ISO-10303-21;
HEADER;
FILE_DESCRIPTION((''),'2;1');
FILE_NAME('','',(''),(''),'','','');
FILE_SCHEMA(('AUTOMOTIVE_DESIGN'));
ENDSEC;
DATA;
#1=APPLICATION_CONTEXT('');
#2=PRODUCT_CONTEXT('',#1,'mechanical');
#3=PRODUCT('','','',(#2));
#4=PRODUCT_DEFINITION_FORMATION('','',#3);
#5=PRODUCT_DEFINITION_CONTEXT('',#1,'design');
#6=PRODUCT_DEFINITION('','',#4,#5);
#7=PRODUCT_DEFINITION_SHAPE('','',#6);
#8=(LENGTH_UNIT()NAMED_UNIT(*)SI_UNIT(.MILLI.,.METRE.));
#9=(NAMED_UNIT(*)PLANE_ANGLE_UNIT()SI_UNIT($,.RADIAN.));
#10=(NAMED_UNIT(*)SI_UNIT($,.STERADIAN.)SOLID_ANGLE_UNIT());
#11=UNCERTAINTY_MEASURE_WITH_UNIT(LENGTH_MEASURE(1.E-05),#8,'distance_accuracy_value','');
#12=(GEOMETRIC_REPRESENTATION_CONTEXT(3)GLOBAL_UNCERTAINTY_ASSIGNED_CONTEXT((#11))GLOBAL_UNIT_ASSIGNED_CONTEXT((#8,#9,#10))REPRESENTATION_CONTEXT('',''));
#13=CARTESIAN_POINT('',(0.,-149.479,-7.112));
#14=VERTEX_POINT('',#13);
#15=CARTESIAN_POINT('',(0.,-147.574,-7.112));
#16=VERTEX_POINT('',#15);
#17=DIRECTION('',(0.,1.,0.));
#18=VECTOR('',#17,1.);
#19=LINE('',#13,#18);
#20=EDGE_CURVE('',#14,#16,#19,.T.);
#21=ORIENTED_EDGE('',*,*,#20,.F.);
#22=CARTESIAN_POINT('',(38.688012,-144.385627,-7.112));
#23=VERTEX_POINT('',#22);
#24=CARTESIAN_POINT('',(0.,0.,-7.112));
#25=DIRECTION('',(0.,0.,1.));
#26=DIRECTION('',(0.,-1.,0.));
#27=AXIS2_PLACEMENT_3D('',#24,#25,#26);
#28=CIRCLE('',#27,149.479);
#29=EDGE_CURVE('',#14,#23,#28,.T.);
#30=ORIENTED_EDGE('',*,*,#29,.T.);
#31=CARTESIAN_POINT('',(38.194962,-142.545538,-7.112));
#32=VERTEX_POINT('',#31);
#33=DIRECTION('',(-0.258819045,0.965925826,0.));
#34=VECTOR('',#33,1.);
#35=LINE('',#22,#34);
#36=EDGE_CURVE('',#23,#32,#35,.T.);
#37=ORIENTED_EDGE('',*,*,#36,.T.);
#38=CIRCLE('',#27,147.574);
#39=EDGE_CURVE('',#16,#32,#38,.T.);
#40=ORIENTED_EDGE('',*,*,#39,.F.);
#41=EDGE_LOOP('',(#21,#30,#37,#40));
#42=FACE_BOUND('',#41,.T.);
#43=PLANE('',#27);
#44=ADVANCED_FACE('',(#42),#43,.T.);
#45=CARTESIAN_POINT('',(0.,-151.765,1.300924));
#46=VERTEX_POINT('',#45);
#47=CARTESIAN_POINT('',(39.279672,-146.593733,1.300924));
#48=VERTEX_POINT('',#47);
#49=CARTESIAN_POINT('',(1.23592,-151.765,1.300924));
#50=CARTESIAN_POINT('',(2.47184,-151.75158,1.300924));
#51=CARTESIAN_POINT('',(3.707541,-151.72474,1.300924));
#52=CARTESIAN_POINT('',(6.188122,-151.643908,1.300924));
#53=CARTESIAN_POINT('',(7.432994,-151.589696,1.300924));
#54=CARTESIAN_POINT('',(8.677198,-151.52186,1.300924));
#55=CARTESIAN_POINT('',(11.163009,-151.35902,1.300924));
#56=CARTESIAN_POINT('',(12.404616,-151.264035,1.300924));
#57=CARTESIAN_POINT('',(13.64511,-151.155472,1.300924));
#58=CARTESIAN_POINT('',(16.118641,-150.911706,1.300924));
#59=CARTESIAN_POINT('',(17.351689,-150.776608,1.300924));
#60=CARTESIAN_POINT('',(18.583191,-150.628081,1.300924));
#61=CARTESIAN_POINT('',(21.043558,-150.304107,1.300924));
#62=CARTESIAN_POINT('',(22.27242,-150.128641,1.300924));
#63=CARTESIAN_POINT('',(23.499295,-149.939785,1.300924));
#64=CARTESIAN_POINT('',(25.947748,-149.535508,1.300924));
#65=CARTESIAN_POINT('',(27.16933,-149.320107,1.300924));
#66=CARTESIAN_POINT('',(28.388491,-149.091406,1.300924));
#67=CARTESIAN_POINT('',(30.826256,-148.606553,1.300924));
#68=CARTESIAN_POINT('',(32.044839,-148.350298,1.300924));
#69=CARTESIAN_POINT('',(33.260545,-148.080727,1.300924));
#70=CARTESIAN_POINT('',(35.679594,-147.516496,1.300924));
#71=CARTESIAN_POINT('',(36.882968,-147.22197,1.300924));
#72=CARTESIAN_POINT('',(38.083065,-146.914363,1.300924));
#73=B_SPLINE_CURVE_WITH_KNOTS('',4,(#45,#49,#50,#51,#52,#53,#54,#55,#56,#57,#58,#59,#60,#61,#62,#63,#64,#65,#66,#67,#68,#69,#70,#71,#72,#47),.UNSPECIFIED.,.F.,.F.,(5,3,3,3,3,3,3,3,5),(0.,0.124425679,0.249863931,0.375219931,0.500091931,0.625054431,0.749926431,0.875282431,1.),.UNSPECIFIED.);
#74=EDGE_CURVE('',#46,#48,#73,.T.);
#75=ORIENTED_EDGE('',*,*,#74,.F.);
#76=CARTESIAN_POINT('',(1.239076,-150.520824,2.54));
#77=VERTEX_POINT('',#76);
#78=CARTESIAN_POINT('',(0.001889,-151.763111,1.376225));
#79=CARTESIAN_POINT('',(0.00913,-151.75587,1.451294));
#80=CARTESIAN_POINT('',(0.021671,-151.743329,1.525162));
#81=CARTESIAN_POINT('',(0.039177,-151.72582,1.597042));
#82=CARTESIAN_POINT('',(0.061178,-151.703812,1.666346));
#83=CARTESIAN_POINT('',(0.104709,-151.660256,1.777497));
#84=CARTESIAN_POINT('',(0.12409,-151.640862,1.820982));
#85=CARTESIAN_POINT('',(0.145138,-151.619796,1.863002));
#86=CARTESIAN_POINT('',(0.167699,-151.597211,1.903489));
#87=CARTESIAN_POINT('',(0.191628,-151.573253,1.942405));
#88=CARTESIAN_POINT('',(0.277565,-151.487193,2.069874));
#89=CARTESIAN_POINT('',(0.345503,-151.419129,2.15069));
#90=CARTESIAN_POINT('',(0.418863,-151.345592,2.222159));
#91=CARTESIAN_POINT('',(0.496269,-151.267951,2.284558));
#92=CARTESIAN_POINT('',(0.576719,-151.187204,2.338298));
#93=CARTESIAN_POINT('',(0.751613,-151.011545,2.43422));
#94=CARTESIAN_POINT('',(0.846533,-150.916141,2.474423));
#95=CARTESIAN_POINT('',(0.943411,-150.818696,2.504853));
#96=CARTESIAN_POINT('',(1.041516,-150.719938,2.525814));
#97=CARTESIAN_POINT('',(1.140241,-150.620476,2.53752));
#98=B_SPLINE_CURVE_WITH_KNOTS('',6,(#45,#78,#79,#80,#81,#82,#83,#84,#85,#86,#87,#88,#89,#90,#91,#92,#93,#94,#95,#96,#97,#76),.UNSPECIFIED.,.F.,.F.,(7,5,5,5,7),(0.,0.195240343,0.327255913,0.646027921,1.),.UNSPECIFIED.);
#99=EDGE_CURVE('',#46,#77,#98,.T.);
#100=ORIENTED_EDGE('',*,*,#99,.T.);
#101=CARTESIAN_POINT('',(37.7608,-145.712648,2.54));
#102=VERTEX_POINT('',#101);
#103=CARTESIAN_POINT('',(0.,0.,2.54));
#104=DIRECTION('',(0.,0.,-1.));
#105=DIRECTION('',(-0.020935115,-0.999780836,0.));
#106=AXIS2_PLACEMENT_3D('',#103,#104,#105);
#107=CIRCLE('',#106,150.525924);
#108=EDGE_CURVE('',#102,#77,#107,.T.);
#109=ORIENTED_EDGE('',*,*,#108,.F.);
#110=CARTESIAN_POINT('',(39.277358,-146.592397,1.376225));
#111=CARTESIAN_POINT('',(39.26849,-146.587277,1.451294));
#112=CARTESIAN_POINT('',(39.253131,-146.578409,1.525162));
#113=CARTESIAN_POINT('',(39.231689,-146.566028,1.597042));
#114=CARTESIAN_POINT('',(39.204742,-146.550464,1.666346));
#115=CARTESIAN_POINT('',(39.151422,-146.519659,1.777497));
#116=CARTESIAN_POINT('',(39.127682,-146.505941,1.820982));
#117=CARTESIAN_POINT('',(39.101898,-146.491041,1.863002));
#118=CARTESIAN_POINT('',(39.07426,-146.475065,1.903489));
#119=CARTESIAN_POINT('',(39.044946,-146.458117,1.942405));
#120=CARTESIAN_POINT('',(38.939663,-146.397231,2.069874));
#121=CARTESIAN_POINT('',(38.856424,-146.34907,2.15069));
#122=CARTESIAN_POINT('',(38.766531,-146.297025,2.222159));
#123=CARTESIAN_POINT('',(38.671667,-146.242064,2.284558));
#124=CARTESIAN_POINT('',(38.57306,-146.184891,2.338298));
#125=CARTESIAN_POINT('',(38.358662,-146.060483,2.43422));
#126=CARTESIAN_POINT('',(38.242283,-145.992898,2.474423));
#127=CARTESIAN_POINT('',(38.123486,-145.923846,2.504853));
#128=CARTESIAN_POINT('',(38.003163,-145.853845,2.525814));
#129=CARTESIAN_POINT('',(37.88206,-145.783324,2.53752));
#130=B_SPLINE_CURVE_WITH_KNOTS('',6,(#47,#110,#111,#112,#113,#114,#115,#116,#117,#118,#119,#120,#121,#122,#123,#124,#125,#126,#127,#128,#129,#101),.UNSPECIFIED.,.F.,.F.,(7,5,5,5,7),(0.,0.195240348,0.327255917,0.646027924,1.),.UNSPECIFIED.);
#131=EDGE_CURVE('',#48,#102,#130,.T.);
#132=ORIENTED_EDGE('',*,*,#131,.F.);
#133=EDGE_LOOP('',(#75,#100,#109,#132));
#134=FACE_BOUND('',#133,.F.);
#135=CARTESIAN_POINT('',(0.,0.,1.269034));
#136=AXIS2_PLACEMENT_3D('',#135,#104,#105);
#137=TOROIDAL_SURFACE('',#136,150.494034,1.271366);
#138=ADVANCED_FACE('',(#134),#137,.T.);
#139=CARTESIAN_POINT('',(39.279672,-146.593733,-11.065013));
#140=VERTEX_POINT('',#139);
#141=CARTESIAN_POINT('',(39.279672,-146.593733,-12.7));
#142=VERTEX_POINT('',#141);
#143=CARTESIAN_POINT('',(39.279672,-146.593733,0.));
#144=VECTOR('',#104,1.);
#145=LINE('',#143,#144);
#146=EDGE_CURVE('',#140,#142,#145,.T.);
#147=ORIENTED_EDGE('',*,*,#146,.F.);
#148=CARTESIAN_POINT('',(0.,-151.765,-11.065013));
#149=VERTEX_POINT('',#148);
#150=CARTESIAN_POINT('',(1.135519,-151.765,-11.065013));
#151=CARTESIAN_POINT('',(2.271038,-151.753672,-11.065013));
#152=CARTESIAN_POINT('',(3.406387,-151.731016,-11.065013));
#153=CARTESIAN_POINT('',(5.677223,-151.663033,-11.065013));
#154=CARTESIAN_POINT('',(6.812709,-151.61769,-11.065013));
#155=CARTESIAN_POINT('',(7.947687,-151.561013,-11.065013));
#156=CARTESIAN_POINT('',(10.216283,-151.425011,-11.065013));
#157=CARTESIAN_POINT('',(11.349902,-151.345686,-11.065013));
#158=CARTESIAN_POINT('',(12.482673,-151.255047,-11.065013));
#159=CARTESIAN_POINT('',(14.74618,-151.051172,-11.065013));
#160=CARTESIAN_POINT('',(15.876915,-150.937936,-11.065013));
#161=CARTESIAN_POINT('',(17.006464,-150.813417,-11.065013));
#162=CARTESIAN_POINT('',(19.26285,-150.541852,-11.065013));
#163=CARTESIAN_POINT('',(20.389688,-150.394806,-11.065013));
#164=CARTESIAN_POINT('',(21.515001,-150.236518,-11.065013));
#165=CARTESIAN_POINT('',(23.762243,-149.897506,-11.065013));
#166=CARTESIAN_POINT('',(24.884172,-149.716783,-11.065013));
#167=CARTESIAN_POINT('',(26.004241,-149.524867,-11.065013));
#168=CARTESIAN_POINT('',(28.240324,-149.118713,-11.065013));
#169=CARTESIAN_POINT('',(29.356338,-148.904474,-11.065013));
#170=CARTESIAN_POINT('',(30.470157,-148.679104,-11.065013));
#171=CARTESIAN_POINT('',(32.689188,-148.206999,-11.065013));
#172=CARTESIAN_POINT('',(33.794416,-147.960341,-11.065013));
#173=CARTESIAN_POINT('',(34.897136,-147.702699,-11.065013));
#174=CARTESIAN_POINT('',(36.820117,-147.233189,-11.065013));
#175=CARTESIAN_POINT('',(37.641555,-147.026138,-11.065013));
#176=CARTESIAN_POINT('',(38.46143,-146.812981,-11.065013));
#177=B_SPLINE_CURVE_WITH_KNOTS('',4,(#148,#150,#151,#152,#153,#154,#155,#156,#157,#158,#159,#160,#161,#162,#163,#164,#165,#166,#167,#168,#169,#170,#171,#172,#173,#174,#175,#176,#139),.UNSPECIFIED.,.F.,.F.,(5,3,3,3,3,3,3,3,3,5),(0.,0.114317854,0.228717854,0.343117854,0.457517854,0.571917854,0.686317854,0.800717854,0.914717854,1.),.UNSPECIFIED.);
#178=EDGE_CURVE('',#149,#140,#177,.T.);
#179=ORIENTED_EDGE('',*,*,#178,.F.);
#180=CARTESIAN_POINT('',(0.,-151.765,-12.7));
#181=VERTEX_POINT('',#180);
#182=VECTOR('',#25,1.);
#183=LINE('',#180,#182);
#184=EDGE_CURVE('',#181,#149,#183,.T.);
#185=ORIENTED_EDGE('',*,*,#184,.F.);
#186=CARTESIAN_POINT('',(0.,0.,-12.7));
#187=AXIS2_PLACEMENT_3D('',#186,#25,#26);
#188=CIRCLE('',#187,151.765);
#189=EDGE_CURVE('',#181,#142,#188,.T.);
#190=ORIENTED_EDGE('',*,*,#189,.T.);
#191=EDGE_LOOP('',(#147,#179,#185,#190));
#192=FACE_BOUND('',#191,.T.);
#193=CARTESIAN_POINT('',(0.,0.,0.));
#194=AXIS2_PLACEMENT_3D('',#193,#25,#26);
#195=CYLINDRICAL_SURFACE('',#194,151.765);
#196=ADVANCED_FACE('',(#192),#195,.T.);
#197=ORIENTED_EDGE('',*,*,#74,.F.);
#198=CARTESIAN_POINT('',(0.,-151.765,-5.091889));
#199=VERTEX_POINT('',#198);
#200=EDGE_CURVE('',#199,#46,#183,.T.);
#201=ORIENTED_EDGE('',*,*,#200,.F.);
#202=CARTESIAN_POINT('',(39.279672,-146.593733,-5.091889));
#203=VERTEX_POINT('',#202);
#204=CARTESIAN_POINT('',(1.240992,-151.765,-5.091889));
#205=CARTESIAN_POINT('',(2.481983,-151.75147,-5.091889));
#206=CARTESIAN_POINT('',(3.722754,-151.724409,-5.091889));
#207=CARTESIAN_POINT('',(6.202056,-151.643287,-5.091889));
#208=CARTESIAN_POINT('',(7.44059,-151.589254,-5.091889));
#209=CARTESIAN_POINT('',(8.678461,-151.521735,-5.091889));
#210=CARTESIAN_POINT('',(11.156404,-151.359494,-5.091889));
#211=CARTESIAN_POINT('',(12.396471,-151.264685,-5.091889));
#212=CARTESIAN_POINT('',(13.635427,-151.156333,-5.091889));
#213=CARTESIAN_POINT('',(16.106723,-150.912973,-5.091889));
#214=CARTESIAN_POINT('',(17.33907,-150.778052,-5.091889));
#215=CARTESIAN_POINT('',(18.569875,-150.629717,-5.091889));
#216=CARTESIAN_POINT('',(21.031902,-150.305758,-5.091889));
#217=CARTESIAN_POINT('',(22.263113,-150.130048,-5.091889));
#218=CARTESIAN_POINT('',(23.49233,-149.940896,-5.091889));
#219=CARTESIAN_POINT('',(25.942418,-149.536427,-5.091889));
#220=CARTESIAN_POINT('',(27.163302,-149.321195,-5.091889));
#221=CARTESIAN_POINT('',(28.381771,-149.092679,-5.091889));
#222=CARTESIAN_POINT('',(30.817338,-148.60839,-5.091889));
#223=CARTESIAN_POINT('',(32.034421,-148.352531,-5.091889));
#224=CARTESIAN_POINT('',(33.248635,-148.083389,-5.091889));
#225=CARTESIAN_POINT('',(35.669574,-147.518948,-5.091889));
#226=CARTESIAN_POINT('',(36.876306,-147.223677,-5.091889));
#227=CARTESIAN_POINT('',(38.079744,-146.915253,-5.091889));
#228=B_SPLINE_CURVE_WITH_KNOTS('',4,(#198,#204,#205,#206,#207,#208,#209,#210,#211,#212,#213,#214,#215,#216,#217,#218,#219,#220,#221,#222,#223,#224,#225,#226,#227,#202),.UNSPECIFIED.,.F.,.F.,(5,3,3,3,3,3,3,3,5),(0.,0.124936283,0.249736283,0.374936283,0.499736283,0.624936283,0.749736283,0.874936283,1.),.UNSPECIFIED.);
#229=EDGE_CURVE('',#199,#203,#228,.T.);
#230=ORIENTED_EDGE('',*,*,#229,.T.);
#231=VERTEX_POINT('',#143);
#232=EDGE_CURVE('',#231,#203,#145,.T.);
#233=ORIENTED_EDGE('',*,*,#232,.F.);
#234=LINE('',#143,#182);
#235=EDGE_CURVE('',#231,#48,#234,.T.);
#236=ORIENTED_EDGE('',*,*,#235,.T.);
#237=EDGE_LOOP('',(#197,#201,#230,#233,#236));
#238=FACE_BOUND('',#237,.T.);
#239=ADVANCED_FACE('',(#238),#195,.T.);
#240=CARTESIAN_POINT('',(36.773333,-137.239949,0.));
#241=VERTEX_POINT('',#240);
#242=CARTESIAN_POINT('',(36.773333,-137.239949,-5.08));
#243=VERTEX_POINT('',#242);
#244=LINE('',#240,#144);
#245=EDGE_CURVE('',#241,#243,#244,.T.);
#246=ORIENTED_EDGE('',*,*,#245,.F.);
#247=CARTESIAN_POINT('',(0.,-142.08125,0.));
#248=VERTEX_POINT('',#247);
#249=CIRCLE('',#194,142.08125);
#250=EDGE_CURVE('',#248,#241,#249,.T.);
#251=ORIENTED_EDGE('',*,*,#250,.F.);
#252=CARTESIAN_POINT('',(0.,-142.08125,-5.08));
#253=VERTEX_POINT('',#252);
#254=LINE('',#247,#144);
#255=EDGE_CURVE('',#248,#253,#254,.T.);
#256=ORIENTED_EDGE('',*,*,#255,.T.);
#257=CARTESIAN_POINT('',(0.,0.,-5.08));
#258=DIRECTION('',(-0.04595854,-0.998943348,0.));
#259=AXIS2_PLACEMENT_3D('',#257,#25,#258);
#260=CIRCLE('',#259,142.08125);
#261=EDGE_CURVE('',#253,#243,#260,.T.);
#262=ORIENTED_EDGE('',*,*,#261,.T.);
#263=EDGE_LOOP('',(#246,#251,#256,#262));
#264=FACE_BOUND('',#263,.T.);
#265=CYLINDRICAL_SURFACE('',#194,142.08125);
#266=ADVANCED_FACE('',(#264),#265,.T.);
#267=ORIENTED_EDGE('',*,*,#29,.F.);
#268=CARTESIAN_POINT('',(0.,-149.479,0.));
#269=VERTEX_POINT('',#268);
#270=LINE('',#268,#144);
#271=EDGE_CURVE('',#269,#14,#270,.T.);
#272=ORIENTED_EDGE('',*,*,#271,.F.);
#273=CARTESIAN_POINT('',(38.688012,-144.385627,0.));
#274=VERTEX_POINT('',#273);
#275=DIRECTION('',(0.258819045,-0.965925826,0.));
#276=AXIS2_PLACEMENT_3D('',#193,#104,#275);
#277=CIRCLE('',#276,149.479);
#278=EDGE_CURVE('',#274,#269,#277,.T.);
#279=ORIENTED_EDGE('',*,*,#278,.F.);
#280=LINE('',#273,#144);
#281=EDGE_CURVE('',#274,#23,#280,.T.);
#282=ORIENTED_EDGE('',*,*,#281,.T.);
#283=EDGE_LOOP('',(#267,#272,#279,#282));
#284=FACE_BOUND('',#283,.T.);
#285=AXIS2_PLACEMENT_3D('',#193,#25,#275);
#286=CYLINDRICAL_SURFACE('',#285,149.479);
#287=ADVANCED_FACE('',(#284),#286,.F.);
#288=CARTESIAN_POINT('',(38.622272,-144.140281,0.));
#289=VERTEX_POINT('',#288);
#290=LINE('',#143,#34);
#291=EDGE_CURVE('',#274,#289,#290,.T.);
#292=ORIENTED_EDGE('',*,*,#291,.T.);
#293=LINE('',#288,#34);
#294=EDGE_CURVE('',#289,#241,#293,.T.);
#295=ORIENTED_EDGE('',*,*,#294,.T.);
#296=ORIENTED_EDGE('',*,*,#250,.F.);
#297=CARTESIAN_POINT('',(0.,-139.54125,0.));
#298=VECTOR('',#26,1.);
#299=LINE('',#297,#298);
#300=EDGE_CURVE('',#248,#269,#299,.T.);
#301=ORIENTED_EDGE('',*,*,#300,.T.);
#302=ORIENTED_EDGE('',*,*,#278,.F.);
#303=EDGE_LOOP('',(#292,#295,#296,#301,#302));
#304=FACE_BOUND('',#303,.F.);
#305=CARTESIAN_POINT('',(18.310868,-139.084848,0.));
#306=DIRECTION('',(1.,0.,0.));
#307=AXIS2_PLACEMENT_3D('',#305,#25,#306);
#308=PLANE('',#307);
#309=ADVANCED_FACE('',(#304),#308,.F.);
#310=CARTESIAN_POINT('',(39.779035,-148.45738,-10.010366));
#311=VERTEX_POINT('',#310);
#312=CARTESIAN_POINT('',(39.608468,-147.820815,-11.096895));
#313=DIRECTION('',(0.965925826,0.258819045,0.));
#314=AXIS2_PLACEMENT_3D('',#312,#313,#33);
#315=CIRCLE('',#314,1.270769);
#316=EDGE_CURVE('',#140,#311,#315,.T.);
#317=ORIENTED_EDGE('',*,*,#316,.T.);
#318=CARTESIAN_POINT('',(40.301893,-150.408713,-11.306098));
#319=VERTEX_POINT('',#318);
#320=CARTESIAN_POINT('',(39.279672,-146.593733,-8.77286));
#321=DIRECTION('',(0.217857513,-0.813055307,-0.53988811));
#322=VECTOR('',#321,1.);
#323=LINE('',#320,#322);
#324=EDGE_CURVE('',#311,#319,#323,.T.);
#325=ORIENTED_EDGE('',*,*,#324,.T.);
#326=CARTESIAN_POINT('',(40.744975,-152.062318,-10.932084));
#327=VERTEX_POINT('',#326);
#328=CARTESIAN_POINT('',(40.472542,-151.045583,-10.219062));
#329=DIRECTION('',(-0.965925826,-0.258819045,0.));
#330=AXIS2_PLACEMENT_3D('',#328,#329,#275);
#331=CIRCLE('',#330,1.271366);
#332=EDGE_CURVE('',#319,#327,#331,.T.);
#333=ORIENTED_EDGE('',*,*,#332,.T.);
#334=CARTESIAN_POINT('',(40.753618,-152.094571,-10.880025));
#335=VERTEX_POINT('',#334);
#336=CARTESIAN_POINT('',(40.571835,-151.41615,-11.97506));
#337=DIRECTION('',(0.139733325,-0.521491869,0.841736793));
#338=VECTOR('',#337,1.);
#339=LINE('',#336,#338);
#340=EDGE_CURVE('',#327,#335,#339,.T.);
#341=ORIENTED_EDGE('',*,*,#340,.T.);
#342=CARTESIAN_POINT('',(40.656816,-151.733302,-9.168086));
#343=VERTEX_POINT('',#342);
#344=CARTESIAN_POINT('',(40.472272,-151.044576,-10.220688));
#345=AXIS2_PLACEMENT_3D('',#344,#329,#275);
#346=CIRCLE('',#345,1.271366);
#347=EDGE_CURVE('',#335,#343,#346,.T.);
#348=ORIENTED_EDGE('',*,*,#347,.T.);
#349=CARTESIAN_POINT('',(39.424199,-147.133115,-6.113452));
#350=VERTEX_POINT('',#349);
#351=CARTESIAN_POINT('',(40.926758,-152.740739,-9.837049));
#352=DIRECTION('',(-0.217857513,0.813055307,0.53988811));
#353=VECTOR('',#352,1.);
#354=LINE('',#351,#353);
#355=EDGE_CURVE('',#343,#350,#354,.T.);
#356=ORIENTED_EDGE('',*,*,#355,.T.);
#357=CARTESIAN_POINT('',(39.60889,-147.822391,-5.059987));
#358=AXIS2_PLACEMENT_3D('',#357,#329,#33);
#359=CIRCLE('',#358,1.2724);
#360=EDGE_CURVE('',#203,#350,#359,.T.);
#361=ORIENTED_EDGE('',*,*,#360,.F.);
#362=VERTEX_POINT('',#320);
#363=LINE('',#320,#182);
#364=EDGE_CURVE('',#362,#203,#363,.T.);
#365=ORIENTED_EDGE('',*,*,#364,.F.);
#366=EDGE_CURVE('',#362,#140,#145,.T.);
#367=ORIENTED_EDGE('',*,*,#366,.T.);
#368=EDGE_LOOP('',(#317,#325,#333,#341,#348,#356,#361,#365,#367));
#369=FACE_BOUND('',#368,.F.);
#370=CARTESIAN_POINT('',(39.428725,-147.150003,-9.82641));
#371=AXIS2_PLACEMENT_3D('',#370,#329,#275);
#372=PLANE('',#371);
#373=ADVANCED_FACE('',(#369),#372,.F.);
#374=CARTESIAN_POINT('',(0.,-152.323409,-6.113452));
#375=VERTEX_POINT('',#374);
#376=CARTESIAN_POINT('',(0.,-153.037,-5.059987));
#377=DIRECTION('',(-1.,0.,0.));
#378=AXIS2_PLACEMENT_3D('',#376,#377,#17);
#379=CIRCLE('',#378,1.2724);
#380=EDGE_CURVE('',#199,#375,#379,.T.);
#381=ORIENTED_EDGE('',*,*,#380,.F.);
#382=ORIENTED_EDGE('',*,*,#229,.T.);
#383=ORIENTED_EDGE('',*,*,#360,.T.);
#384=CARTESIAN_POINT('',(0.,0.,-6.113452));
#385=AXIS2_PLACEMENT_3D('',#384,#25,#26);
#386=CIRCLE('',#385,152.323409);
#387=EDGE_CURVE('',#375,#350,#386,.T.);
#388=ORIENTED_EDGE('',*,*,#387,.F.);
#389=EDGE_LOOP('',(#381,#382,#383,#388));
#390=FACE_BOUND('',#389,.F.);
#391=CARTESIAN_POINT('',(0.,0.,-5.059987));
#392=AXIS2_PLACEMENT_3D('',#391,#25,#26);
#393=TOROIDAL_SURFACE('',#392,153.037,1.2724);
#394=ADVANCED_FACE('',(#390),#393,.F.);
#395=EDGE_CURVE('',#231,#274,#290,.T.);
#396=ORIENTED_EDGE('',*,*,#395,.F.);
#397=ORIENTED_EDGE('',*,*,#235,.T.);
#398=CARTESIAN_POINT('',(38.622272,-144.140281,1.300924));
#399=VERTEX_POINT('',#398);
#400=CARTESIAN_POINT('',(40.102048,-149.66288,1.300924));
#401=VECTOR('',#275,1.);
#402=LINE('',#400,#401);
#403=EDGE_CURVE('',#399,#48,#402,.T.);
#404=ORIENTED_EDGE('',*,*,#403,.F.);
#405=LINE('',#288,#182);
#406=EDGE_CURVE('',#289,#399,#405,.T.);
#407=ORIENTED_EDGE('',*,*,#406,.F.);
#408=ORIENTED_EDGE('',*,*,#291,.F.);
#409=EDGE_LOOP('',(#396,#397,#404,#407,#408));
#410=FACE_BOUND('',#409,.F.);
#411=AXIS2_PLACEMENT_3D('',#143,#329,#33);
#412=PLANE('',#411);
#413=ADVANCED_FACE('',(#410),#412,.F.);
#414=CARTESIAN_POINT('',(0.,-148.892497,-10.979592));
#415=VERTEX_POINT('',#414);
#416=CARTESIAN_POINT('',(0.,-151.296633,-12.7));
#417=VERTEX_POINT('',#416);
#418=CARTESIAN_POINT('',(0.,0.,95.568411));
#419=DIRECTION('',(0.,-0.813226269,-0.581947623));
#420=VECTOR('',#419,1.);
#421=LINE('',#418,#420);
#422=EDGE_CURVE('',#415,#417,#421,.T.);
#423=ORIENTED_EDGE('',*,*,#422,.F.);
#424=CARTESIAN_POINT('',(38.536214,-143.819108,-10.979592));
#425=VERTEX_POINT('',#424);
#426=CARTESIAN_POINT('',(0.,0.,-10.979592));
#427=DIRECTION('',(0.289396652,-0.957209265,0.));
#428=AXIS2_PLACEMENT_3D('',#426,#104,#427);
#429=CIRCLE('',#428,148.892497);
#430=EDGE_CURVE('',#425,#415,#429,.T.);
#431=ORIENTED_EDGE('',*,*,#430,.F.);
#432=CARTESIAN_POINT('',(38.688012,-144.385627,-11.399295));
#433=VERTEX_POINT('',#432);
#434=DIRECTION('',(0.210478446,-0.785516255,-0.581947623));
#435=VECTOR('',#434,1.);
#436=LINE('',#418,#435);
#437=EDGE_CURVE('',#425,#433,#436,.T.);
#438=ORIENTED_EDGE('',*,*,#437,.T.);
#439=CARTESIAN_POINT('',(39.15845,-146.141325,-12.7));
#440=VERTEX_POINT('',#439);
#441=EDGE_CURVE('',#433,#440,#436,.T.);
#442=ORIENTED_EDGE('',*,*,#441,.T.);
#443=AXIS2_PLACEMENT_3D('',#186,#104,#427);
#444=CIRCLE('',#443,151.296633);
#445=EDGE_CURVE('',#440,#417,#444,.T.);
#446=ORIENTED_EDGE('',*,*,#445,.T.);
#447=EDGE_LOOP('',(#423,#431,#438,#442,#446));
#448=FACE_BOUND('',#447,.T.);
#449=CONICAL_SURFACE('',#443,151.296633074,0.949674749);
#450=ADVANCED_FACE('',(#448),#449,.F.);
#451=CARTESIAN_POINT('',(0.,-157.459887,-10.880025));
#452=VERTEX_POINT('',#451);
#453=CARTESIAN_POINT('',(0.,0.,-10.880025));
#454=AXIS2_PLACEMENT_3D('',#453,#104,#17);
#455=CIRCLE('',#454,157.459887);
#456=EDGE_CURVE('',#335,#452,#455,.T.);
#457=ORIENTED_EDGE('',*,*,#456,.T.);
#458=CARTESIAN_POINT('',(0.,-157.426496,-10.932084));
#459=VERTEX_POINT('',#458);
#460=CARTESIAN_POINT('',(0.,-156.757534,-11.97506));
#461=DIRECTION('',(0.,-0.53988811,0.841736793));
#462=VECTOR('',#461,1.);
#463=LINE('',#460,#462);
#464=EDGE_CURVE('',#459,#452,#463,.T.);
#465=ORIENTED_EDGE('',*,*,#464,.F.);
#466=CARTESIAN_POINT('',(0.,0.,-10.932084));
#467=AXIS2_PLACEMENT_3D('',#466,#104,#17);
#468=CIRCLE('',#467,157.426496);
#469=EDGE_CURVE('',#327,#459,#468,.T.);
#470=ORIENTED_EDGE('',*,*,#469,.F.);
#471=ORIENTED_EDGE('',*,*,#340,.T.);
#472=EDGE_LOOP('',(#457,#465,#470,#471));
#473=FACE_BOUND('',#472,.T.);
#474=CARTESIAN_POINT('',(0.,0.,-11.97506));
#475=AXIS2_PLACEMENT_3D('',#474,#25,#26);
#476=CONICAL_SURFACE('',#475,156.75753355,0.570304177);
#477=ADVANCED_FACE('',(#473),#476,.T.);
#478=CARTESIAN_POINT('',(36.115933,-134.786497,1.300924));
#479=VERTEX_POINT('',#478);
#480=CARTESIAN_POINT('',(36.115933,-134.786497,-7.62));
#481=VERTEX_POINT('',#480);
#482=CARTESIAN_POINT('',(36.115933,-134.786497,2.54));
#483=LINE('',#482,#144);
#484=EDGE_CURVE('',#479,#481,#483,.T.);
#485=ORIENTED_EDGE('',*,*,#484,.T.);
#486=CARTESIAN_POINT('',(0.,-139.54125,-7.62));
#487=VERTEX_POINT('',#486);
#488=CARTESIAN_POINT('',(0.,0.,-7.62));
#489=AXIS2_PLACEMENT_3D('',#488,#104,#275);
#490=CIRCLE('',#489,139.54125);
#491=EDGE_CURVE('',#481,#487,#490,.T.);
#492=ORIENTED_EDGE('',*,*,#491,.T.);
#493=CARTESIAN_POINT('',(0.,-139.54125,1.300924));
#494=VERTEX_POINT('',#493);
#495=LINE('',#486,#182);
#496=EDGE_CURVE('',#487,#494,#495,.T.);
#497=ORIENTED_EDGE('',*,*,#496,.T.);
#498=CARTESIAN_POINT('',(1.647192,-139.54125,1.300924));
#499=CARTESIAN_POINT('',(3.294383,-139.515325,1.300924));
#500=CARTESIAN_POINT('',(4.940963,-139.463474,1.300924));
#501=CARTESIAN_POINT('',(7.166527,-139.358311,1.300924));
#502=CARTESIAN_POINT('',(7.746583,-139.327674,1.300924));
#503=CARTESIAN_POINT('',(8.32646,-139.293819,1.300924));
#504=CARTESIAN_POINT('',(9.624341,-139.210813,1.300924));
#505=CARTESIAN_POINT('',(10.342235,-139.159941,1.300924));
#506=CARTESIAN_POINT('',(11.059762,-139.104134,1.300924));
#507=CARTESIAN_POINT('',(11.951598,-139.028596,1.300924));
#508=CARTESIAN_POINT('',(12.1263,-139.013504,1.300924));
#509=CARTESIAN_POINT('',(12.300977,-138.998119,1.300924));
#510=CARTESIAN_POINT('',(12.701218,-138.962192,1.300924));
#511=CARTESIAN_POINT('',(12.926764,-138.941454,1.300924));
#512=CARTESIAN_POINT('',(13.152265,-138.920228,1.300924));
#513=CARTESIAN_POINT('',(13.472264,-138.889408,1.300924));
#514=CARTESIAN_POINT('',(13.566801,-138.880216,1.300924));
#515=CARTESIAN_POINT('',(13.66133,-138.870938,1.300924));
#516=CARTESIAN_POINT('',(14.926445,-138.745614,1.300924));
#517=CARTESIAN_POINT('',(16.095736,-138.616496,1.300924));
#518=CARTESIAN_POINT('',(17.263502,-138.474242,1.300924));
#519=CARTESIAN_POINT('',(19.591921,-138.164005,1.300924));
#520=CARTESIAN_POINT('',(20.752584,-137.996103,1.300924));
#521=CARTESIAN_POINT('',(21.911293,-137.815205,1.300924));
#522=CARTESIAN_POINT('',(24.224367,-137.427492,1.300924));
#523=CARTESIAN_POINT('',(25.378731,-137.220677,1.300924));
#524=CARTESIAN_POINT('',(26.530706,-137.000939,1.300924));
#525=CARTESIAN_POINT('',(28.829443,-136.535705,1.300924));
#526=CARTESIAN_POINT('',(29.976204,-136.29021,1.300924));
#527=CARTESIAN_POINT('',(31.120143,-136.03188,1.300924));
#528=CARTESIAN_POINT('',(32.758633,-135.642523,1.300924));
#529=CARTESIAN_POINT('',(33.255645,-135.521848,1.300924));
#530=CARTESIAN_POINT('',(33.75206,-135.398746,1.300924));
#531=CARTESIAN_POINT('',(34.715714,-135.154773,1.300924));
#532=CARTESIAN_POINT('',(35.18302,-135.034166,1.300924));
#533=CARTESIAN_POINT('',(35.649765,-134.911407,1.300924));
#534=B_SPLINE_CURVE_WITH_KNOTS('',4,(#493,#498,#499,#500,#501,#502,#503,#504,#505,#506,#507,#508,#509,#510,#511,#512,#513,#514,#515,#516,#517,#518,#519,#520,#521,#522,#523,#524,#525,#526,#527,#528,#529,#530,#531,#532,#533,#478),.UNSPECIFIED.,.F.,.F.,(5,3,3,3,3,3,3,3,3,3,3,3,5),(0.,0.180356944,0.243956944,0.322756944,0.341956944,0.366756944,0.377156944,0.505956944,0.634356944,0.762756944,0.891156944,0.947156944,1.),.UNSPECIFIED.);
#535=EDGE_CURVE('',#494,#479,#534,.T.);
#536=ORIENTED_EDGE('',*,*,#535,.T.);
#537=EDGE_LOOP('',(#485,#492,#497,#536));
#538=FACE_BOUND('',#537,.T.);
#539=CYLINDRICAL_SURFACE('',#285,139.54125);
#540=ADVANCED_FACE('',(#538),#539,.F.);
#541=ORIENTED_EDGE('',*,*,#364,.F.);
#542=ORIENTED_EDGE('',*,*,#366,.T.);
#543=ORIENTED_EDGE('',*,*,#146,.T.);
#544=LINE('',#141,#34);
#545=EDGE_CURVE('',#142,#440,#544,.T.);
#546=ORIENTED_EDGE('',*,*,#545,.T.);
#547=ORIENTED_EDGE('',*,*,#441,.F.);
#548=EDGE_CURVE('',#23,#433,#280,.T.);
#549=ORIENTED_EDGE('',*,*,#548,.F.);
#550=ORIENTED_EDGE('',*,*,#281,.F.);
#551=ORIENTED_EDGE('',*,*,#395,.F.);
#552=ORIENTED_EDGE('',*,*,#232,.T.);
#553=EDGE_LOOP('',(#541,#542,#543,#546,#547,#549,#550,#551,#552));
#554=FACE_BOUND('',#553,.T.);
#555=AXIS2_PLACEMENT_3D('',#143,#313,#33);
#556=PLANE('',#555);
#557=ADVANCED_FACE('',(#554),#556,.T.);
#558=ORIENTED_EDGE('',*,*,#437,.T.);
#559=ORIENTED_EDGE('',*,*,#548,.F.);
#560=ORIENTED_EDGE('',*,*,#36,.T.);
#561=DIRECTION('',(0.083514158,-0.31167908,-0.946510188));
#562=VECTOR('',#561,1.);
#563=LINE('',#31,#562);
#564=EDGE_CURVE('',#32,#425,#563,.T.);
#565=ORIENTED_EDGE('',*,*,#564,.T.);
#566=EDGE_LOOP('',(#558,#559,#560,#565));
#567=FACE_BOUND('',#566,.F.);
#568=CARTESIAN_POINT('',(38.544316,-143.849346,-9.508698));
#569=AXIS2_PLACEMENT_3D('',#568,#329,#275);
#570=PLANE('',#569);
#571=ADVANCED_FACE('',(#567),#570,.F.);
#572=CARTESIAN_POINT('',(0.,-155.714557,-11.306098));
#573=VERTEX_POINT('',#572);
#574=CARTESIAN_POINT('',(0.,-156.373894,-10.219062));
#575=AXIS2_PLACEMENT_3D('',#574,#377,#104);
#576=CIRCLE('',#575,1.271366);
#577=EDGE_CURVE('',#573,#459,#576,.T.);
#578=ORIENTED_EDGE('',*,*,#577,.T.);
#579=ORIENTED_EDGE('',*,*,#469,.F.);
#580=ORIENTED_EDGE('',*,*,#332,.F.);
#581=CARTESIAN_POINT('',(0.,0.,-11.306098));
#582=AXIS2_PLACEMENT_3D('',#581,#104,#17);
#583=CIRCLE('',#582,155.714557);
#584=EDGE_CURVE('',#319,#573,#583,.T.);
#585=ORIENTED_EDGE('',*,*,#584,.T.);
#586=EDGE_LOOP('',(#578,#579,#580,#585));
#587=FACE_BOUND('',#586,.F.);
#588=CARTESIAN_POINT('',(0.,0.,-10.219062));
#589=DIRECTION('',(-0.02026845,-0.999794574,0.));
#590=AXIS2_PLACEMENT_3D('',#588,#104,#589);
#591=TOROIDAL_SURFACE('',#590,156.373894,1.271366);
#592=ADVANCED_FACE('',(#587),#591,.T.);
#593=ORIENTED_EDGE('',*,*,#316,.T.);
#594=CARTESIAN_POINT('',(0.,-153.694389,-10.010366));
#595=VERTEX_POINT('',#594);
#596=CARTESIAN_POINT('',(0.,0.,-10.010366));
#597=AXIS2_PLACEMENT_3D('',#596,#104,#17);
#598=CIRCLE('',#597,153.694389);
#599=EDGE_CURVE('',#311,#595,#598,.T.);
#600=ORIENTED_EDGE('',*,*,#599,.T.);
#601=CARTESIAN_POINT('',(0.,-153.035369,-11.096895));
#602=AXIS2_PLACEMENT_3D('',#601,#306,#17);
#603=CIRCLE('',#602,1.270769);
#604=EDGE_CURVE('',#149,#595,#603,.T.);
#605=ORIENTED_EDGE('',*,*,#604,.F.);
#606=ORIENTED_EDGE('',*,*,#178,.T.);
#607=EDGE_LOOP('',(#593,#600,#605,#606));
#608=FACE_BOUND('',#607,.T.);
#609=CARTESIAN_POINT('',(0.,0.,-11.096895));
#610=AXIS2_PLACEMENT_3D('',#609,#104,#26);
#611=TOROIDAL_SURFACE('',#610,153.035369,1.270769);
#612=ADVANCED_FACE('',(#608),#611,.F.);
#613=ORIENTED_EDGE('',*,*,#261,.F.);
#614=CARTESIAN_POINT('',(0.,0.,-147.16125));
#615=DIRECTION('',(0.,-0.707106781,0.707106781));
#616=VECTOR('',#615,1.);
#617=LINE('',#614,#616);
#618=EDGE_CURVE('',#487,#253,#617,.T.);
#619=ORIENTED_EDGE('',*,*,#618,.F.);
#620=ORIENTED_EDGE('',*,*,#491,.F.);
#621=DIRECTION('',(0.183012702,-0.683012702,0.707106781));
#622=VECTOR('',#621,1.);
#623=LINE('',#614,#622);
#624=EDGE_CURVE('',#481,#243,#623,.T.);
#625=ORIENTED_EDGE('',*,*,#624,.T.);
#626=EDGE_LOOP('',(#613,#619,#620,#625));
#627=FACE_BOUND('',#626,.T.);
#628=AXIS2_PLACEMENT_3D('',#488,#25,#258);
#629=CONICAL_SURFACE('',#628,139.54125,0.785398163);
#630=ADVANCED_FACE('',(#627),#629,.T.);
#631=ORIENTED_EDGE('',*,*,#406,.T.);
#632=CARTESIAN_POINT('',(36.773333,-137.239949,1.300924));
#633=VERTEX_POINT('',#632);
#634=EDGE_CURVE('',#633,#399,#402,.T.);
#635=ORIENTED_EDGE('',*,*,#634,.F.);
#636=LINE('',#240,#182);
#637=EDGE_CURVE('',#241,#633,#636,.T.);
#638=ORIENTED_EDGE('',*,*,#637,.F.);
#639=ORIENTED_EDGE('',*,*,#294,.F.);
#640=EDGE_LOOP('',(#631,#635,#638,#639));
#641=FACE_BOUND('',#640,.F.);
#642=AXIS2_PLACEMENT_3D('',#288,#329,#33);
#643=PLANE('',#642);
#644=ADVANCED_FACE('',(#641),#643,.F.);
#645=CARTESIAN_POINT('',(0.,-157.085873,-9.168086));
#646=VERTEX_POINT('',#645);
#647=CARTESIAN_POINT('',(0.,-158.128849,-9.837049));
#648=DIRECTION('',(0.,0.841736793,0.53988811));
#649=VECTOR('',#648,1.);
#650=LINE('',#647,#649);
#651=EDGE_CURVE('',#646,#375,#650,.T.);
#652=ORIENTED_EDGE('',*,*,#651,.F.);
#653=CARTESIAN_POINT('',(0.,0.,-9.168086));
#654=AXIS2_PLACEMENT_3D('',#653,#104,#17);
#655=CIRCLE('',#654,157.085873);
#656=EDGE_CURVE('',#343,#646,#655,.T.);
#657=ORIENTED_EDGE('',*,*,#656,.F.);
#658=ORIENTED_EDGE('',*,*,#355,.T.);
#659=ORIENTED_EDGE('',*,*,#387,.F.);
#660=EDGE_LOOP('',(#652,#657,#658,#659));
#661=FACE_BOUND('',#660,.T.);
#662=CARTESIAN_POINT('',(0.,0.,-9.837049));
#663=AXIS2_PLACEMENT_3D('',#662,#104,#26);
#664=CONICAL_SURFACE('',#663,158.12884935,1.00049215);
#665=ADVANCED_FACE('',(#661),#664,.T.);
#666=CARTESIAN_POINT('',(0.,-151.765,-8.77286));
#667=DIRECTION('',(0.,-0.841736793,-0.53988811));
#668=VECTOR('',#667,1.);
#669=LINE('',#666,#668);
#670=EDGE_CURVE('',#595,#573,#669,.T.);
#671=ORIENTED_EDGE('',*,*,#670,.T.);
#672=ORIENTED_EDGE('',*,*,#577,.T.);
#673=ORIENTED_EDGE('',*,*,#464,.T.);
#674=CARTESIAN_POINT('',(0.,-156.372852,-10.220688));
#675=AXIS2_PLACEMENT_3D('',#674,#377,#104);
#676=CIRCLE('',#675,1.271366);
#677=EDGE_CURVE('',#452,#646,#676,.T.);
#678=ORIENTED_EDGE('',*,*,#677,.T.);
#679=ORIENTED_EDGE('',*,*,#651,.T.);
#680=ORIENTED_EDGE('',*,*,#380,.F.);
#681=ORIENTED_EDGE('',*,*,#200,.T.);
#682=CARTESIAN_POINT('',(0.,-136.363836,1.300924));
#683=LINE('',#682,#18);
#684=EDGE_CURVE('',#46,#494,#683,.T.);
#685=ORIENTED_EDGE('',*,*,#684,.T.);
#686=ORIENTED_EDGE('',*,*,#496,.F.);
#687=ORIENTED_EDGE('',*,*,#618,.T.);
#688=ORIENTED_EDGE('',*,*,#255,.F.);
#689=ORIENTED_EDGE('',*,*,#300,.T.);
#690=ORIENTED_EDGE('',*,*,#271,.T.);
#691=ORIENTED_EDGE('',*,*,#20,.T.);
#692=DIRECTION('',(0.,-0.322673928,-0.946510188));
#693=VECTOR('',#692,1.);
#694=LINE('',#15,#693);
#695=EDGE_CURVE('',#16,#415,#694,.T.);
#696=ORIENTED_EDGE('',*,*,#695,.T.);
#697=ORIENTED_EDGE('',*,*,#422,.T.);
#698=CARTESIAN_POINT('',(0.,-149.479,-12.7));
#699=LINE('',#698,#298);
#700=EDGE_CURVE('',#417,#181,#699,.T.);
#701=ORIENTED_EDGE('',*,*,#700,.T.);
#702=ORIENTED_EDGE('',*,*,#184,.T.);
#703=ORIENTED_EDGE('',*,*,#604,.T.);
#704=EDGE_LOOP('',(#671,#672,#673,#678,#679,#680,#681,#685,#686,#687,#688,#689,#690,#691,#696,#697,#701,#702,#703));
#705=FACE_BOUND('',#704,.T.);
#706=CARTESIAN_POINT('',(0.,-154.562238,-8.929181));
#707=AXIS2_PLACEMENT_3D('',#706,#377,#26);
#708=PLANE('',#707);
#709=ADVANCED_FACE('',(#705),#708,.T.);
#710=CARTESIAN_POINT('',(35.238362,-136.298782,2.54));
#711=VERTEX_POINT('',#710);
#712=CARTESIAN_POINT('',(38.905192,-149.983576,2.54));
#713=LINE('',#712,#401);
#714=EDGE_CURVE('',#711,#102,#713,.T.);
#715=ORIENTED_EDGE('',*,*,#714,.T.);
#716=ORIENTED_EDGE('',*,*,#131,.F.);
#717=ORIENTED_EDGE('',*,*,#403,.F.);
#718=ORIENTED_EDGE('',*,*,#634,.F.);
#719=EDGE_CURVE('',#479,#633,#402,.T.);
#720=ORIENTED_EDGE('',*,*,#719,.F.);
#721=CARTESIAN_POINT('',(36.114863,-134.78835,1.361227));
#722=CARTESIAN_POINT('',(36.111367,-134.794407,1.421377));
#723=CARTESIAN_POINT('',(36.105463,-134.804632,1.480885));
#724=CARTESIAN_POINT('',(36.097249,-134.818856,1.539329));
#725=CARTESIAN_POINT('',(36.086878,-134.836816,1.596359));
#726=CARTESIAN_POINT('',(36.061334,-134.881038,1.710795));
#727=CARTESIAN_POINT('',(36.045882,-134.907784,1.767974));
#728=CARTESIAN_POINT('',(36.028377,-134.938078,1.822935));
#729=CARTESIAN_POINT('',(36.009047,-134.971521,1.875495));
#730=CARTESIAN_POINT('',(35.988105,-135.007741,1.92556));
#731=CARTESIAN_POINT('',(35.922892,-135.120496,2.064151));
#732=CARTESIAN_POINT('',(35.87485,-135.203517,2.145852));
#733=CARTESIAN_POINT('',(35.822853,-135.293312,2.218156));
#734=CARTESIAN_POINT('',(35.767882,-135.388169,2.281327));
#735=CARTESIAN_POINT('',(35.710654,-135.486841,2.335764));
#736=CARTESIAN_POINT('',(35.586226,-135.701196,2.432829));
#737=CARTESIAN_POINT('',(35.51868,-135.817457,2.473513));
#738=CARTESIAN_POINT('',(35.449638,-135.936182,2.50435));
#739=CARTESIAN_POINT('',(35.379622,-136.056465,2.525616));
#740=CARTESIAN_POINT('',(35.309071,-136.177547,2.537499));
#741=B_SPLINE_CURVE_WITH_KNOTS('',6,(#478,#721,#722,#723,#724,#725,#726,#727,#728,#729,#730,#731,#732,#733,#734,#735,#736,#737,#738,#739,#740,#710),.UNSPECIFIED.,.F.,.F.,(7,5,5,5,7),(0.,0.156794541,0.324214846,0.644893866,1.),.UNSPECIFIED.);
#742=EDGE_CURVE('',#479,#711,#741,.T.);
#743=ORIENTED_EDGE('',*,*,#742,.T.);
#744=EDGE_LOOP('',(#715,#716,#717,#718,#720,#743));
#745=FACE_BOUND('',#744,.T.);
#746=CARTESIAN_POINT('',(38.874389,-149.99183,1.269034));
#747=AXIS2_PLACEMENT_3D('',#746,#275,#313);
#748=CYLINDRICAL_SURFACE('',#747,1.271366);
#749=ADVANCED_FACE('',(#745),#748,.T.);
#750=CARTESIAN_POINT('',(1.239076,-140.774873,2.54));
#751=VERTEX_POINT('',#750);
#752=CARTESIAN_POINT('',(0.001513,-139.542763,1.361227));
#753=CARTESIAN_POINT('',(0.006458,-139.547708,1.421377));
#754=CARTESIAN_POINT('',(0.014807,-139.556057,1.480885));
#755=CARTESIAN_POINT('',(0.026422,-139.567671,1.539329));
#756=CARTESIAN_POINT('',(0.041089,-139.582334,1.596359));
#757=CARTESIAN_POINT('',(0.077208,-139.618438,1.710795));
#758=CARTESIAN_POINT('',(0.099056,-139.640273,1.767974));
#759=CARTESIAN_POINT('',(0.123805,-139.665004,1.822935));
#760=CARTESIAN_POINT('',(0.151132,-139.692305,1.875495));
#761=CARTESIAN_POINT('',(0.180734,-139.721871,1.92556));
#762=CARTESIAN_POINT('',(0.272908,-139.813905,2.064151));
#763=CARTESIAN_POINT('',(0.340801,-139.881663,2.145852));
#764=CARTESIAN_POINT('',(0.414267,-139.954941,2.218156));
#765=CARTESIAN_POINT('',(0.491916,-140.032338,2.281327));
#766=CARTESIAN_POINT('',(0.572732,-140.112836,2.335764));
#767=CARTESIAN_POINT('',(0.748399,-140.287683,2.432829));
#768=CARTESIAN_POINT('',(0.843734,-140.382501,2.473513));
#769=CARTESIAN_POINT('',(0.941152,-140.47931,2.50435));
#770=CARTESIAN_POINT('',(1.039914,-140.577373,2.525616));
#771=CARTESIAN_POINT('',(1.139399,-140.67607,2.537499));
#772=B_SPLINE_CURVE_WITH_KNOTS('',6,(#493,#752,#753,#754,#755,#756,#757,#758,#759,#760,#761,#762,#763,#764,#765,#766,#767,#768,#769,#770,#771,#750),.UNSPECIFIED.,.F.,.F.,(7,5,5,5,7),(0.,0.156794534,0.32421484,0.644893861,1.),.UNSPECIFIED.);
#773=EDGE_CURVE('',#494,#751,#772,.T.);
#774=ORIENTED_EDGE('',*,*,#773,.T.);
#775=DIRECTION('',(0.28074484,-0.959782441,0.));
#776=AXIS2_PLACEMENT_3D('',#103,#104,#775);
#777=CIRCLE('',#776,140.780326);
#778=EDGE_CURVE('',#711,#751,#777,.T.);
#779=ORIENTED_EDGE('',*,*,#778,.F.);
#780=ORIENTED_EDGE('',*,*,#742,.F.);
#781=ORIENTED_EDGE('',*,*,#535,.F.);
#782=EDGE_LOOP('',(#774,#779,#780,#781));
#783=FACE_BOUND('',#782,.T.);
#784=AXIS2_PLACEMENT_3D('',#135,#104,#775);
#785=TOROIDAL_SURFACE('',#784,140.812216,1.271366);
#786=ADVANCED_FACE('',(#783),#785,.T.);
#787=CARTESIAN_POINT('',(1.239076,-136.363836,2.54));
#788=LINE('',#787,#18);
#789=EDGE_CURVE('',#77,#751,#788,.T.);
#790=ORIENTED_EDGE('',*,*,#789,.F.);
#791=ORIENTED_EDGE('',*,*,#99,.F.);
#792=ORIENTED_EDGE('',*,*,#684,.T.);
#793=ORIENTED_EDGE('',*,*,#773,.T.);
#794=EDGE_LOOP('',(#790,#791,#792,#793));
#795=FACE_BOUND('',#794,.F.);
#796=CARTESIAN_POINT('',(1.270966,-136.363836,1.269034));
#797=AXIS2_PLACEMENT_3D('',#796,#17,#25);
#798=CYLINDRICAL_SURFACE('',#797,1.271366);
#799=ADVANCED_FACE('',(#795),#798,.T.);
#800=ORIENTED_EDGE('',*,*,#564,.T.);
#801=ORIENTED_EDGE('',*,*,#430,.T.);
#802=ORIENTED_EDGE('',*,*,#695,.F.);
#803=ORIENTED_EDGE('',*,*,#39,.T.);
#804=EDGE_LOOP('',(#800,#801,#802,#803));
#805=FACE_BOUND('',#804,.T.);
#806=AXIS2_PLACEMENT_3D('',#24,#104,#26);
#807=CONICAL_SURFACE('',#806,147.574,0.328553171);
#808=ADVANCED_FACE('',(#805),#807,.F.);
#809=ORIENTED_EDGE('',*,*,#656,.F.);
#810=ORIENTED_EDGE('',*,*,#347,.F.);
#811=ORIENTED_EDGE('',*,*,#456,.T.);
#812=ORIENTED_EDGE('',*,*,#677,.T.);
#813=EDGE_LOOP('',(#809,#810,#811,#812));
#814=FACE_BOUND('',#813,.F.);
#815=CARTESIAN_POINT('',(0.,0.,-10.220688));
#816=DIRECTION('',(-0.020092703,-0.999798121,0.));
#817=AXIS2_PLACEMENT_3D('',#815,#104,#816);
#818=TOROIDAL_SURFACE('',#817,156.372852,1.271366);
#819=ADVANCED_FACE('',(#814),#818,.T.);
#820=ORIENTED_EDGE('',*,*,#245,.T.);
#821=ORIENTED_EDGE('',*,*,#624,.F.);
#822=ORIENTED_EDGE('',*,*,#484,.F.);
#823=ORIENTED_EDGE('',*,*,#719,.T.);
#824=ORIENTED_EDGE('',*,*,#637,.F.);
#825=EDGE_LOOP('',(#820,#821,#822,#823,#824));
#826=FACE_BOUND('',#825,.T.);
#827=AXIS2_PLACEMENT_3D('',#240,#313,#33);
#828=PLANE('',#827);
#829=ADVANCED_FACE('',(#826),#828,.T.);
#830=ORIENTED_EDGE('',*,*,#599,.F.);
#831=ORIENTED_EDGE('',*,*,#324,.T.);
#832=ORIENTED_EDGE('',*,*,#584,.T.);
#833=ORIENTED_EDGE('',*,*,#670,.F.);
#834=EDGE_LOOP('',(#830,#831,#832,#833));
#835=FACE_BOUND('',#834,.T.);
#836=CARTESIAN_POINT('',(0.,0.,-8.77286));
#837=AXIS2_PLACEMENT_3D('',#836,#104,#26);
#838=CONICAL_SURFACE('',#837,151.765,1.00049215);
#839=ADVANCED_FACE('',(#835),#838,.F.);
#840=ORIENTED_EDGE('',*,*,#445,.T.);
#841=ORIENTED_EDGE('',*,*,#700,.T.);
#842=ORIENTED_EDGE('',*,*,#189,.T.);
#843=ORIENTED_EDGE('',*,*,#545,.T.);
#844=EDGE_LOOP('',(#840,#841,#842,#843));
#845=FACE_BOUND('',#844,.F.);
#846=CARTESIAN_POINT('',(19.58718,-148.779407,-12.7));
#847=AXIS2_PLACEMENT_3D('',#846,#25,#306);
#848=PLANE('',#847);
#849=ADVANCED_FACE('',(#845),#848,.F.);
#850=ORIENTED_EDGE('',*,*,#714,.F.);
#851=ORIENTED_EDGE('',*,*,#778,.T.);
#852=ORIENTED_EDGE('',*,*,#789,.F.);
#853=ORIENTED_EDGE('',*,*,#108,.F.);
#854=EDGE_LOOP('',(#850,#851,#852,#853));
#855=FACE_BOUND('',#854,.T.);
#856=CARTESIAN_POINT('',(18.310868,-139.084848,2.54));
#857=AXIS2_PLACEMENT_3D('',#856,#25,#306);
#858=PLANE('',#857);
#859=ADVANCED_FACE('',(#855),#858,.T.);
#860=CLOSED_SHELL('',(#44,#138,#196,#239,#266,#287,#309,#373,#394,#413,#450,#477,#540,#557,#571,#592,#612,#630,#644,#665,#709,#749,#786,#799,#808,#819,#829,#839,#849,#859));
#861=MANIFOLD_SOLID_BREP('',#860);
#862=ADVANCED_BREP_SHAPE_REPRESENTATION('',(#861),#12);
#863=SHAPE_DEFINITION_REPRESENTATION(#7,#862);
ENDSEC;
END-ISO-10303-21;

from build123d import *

# Parameters (mm, degrees)
F2_DEPTH      = 2.54
F3_DEPTH      = 7.62
F5_DEPTH      = 12.7
F7_ANGLE      = 15
F8_T2_ANGLE   = 20.2683164311
F8_T4_ANGLE   = 18.6436758241
F10_ANGLE     = 15
F11_T2_ANGLE  = 15
F11_T4_ANGLE  = 15
F11_T5_DEPTH  = 18.5785787418
F11_T7_DEPTH  = 18.5785787418
F11_T10_ANGLE = 17.3026091046
F11_T12_ANGLE = 17.3227523422
F11_T14_ANGLE = 17.3991627069
F11_T16_ANGLE = 17.6093282682


# Not quite as in the source:
# - a fillet or chamfer that OpenCascade refuses, or shapes differently, is made with other operations: its cross-section is extruded or revolved along the edge and cut away or added


with BuildPart() as f2:
    # F1 (on Top) → F2 (new body)
    with BuildSketch(Plane.XY):
        with BuildLine():
            ThreePointArc((36.1159330774, -134.7864972077), (18.2137880201, -138.3474552622), (0, -139.54125))
            Line((0, -139.54125), (0, -142.08125))
            ThreePointArc((0, -142.08125), (18.5453245484, -140.8657252101), (36.773333452, -137.2399488064))
            Line((36.773333452, -137.2399488064), (36.1159330774, -134.7864972077))
        make_face()
        with BuildLine():
            ThreePointArc((36.773333452, -137.2399488064), (18.5453245484, -140.8657252101), (0, -142.08125))
            Line((0, -142.08125), (0, -149.225))
            ThreePointArc((0, -149.225), (19.477771034, -147.9483594385), (38.6222720054, -144.140281428))
            Line((38.6222720054, -144.140281428), (36.773333452, -137.2399488064))
        make_face()
        with BuildLine():
            ThreePointArc((38.6222720054, -144.140281428), (19.477771034, -147.9483594385), (0, -149.225))
            Line((0, -149.225), (0, -151.765))
            ThreePointArc((0, -151.765), (19.8093075623, -150.4666293864), (39.27967238, -146.5937330268))
            Line((39.27967238, -146.5937330268), (38.6222720054, -144.140281428))
        make_face()
    extrude(amount=F2_DEPTH)

    # F1 (on Top) → F3 (join)
    with BuildSketch(Plane.XY):
        with BuildLine():
            ThreePointArc((36.1159330774, -134.7864972077), (18.2137880201, -138.3474552622), (0, -139.54125))
            Line((0, -139.54125), (0, -142.08125))
            ThreePointArc((0, -142.08125), (18.5453245484, -140.8657252101), (36.773333452, -137.2399488064))
            Line((36.773333452, -137.2399488064), (36.1159330774, -134.7864972077))
        make_face()
    extrude(amount=-F3_DEPTH)

    # F4 (on face) → F5 (join)
    with BuildSketch(Plane.XY):
        with BuildLine():
            ThreePointArc((38.6880120429, -144.3856265879), (19.5109246869, -148.2001864333), (0, -149.479))
            Line((0, -149.479), (0, -151.765))
            ThreePointArc((0, -151.765), (19.8093075623, -150.4666293864), (39.27967238, -146.5937330268))
            Line((39.27967238, -146.5937330268), (38.6880120429, -144.3856265879))
        make_face()
    extrude(amount=-F5_DEPTH)

    # F6 (on face) → F7 (revolve)
    with BuildSketch(Plane(origin=(0, 0, 0), x_dir=(0, -1, 0), z_dir=(-1, 0, 0))):
        Polygon((147.574, -7.112), (149.479, -12.7), (149.479, -7.112), align=None)
    revolve(axis=Axis((0, 0, 0), (0, 0, 1)), revolution_arc=F7_ANGLE)

    # F8: chamfer of 2.54 on 2 edges, made by hand

    # F8_s1 → F8_t2 (revolve, cut)
    with BuildSketch(Plane(origin=(0, 0, 0), x_dir=(0, 0, 1), z_dir=(-0.9989433481, 0.0459585396, 0))):
        Polygon((-7.62, -139.54125), (-5.08, -142.08125), (-7.62, -142.08125), align=None)
    revolve(axis=Axis((0, 0, -7.62), (0, 0, 1)), revolution_arc=F8_T2_ANGLE, mode=Mode.SUBTRACT)

    # F8_s3 → F8_t4 (revolve, cut)
    with BuildSketch(Plane(origin=(0, 0, 0), x_dir=(0, 0, 1), z_dir=(0.9572092654, 0.289396652, 0))):
        Polygon((-12.7, 151.2966330745), (-10.9795917766, 148.8924971966), (-12.7, 149.479), align=None)
    revolve(axis=Axis((0, 0, -12.7), (0, 0, -1)), revolution_arc=F8_T4_ANGLE, mode=Mode.SUBTRACT)

    # F9 (on face) → F10 (revolve)
    with BuildSketch(Plane(origin=(0, 0, 0), x_dir=(0, -1, 0), z_dir=(-1, 0, 0))):
        Polygon((158.1288493504, -9.8370487633), (151.765, -5.7552899175), (151.765, -8.7728602812), (156.7575335503, -11.9750602171), align=None)
        Polygon((151.765, -8.7728602812), (151.765, -5.7552899175), (151.765, 2.54), (139.54125, 2.54), (139.54125, -7.62), (142.08125, -5.08), (142.08125, 0), (149.479, 0), (149.479, -7.112), (147.574, -7.112), (148.8924971966, -10.9795917766), (151.2966330745, -12.7), (151.765, -12.7), align=None)
    revolve(axis=Axis((0, 0, 0), (0, 0, 1)), revolution_arc=F10_ANGLE)

    # F11: fillet of radius 1.27 on 8 edges, made by hand

    # F11_s1 → F11_t2 (revolve)
    with BuildSketch(Plane.YZ):
        with BuildLine():
            ThreePointArc((-151.7646, -5.0599866722), (-151.9205140931, -5.6702824854), (-152.3500463685, -6.1310125674))
            Line((-152.3500463685, -6.1310125674), (-152.2813510053, -6.2381151569))
            ThreePointArc((-152.2813510053, -6.2381151569), (-151.9889357987, -6.0500854846), (-151.6963046368, -5.862392507))
            Line((-151.6963046368, -5.862392507), (-151.63776, -5.7552899175))
            ThreePointArc((-151.63776, -5.7552899175), (-151.63776, -5.4076382949), (-151.63736, -5.0599866722))
            Line((-151.63736, -5.0599866722), (-151.7646, -5.0599866722))
        make_face()
    revolve(axis=Axis((0, 0, -5.7552899175), (0, 0, 1)), revolution_arc=F11_T2_ANGLE)

    # F11_s3 → F11_t4 (revolve)
    with BuildSketch(Plane.YZ):
        with BuildLine():
            ThreePointArc((-151.7646, -11.0968951513), (-152.4258553263, -9.9818406517), (-153.7214416132, -10.0272423808))
            Line((-153.7214416132, -10.0272423808), (-153.7900489045, -9.9202771037))
            ThreePointArc((-153.7900489045, -9.9202771037), (-152.8117201202, -9.2932544013), (-151.8336072912, -8.6658950041))
            Line((-151.8336072912, -8.6658950041), (-151.6379231299, -8.7728602812))
            ThreePointArc((-151.6379231299, -8.7728602812), (-151.6379231299, -9.9348777163), (-151.6375231299, -11.0968951513))
            Line((-151.6375231299, -11.0968951513), (-151.7646, -11.0968951513))
        make_face()
    revolve(axis=Axis((0, 0, -8.7728602812), (0, 0, 1)), revolution_arc=F11_T4_ANGLE)

    # F11_s6 → F11_t5 (cut)
    with BuildSketch(Plane.XZ.offset(136.3638356291)):
        with BuildLine():
            ThreePointArc((1.2709656854, 2.5404), (0.3719743879, 2.1680256121), (-0.0004, 1.2690343146))
            Line((-0.0004, 1.2690343146), (-0.1275365685, 1.2690343146))
            ThreePointArc((-0.1275365685, 1.2690343146), (-0.1271365685, 1.9045171573), (-0.1271365685, 2.54))
            Line((-0.1271365685, 2.54), (0, 2.6671365685))
            ThreePointArc((0, 2.6671365685), (0.6354828427, 2.6671365685), (1.2709656854, 2.6675365685))
            Line((1.2709656854, 2.6675365685), (1.2709656854, 2.5404))
        make_face()
    extrude(amount=F11_T5_DEPTH, mode=Mode.SUBTRACT)

    # F11_s8 → F11_t7 (cut)
    with BuildSketch(Plane(origin=(40.1020477334, -149.6628796285, 0), x_dir=(0, 0, 1), z_dir=(-0.2588190451, 0.9659258263, 0))):
        with BuildLine():
            ThreePointArc((1.2690343146, 0.0004), (2.1680256121, -0.3719743879), (2.5404, -1.2709656854))
            Line((2.5404, -1.2709656854), (2.6675365685, -1.2709656854))
            ThreePointArc((2.6675365685, -1.2709656854), (2.6671365685, -0.6354828427), (2.6671365685, 0))
            Line((2.6671365685, 0), (2.54, 0.1271365685))
            ThreePointArc((2.54, 0.1271365685), (1.9045171573, 0.1271365685), (1.2690343146, 0.1275365685))
            Line((1.2690343146, 0.1275365685), (1.2690343146, 0.0004))
        make_face()
    extrude(amount=F11_T7_DEPTH, mode=Mode.SUBTRACT)

    # F11_s9 → F11_t10 (revolve, cut)
    with BuildSketch(Plane(origin=(0, 0, 0), x_dir=(0, 0, 1), z_dir=(-0.9997981213, 0.0200927029, 0))):
        with BuildLine():
            ThreePointArc((-9.1505328065, -157.0592467258), (-9.9493287423, -157.6149202728), (-10.9070832984, -157.443006783))
            Line((-10.9070832984, -157.443006783), (-10.9757228201, -157.5500223104))
            ThreePointArc((-10.9757228201, -157.5500223104), (-10.440597575, -157.8927752468), (-9.9056882851, -158.2358648778))
            Line((-9.9056882851, -158.2358648778), (-9.7300332359, -158.1974888721))
            ThreePointArc((-9.7300332359, -158.1974888721), (-9.3869436048, -157.6625795822), (-9.043517279, -157.1278862476))
            Line((-9.043517279, -157.1278862476), (-9.1505328065, -157.0592467258))
        make_face()
    revolve(axis=Axis((0, 0, -9.8370487633), (0, 0, 1)), revolution_arc=F11_T10_ANGLE, mode=Mode.SUBTRACT)

    # F11_s11 → F11_t12 (revolve, cut)
    with BuildSketch(Plane(origin=(0, 0, 0), x_dir=(0, 0, 1), z_dir=(-0.9997945739, 0.02026845, 0))):
        with BuildLine():
            ThreePointArc((-10.9054575925, -157.4440495071), (-11.4611311395, -156.6452535713), (-11.2892176497, -155.6874990152))
            Line((-11.2892176497, -155.6874990152), (-11.3962331771, -155.6188594935))
            ThreePointArc((-11.3962331771, -155.6188594935), (-11.7389861135, -156.1539847386), (-12.0820757445, -156.6888940285))
            Line((-12.0820757445, -156.6888940285), (-12.0436997388, -156.8645490777))
            ThreePointArc((-12.0436997388, -156.8645490777), (-11.5087904489, -157.2076387088), (-10.9740971142, -157.5510650346))
            Line((-10.9740971142, -157.5510650346), (-10.9054575925, -157.4440495071))
        make_face()
    revolve(axis=Axis((0, 0, -11.9750602171), (0, 0, 1)), revolution_arc=F11_T12_ANGLE, mode=Mode.SUBTRACT)

    # F11_s13 → F11_t14 (revolve, cut)
    with BuildSketch(Plane(origin=(0, 0, 0), x_dir=(0, 0, 1), z_dir=(-0.9997808365, 0.0209351147, 0))):
        with BuildLine():
            ThreePointArc((2.5404, -150.4940343146), (2.1680256121, -151.3930256121), (1.2690343146, -151.7654))
            Line((1.2690343146, -151.7654), (1.2690343146, -151.8925365685))
            ThreePointArc((1.2690343146, -151.8925365685), (1.9045171573, -151.8921365685), (2.54, -151.8921365685))
            Line((2.54, -151.8921365685), (2.6671365685, -151.765))
            ThreePointArc((2.6671365685, -151.765), (2.6671365685, -151.1295171573), (2.6675365685, -150.4940343146))
            Line((2.6675365685, -150.4940343146), (2.5404, -150.4940343146))
        make_face()
    revolve(axis=Axis((0, 0, 2.54), (0, 0, 1)), revolution_arc=F11_T14_ANGLE, mode=Mode.SUBTRACT)

    # F11_s15 → F11_t16 (revolve, cut)
    with BuildSketch(Plane(origin=(0, 0, 0), x_dir=(0, 0, 1), z_dir=(0.9597824413, 0.2807448405, 0))):
        with BuildLine():
            ThreePointArc((1.2690343146, 139.54085), (2.1680256121, 139.9132243879), (2.5404, 140.8122156854))
            Line((2.5404, 140.8122156854), (2.6675365685, 140.8122156854))
            ThreePointArc((2.6675365685, 140.8122156854), (2.6671365685, 140.1767328427), (2.6671365685, 139.54125))
            Line((2.6671365685, 139.54125), (2.54, 139.4141134315))
            ThreePointArc((2.54, 139.4141134315), (1.9045171573, 139.4141134315), (1.2690343146, 139.4137134315))
            Line((1.2690343146, 139.4137134315), (1.2690343146, 139.54085))
        make_face()
    revolve(axis=Axis((0, 0, 2.54), (0, 0, -1)), revolution_arc=F11_T16_ANGLE, mode=Mode.SUBTRACT)


solid = f2.part
